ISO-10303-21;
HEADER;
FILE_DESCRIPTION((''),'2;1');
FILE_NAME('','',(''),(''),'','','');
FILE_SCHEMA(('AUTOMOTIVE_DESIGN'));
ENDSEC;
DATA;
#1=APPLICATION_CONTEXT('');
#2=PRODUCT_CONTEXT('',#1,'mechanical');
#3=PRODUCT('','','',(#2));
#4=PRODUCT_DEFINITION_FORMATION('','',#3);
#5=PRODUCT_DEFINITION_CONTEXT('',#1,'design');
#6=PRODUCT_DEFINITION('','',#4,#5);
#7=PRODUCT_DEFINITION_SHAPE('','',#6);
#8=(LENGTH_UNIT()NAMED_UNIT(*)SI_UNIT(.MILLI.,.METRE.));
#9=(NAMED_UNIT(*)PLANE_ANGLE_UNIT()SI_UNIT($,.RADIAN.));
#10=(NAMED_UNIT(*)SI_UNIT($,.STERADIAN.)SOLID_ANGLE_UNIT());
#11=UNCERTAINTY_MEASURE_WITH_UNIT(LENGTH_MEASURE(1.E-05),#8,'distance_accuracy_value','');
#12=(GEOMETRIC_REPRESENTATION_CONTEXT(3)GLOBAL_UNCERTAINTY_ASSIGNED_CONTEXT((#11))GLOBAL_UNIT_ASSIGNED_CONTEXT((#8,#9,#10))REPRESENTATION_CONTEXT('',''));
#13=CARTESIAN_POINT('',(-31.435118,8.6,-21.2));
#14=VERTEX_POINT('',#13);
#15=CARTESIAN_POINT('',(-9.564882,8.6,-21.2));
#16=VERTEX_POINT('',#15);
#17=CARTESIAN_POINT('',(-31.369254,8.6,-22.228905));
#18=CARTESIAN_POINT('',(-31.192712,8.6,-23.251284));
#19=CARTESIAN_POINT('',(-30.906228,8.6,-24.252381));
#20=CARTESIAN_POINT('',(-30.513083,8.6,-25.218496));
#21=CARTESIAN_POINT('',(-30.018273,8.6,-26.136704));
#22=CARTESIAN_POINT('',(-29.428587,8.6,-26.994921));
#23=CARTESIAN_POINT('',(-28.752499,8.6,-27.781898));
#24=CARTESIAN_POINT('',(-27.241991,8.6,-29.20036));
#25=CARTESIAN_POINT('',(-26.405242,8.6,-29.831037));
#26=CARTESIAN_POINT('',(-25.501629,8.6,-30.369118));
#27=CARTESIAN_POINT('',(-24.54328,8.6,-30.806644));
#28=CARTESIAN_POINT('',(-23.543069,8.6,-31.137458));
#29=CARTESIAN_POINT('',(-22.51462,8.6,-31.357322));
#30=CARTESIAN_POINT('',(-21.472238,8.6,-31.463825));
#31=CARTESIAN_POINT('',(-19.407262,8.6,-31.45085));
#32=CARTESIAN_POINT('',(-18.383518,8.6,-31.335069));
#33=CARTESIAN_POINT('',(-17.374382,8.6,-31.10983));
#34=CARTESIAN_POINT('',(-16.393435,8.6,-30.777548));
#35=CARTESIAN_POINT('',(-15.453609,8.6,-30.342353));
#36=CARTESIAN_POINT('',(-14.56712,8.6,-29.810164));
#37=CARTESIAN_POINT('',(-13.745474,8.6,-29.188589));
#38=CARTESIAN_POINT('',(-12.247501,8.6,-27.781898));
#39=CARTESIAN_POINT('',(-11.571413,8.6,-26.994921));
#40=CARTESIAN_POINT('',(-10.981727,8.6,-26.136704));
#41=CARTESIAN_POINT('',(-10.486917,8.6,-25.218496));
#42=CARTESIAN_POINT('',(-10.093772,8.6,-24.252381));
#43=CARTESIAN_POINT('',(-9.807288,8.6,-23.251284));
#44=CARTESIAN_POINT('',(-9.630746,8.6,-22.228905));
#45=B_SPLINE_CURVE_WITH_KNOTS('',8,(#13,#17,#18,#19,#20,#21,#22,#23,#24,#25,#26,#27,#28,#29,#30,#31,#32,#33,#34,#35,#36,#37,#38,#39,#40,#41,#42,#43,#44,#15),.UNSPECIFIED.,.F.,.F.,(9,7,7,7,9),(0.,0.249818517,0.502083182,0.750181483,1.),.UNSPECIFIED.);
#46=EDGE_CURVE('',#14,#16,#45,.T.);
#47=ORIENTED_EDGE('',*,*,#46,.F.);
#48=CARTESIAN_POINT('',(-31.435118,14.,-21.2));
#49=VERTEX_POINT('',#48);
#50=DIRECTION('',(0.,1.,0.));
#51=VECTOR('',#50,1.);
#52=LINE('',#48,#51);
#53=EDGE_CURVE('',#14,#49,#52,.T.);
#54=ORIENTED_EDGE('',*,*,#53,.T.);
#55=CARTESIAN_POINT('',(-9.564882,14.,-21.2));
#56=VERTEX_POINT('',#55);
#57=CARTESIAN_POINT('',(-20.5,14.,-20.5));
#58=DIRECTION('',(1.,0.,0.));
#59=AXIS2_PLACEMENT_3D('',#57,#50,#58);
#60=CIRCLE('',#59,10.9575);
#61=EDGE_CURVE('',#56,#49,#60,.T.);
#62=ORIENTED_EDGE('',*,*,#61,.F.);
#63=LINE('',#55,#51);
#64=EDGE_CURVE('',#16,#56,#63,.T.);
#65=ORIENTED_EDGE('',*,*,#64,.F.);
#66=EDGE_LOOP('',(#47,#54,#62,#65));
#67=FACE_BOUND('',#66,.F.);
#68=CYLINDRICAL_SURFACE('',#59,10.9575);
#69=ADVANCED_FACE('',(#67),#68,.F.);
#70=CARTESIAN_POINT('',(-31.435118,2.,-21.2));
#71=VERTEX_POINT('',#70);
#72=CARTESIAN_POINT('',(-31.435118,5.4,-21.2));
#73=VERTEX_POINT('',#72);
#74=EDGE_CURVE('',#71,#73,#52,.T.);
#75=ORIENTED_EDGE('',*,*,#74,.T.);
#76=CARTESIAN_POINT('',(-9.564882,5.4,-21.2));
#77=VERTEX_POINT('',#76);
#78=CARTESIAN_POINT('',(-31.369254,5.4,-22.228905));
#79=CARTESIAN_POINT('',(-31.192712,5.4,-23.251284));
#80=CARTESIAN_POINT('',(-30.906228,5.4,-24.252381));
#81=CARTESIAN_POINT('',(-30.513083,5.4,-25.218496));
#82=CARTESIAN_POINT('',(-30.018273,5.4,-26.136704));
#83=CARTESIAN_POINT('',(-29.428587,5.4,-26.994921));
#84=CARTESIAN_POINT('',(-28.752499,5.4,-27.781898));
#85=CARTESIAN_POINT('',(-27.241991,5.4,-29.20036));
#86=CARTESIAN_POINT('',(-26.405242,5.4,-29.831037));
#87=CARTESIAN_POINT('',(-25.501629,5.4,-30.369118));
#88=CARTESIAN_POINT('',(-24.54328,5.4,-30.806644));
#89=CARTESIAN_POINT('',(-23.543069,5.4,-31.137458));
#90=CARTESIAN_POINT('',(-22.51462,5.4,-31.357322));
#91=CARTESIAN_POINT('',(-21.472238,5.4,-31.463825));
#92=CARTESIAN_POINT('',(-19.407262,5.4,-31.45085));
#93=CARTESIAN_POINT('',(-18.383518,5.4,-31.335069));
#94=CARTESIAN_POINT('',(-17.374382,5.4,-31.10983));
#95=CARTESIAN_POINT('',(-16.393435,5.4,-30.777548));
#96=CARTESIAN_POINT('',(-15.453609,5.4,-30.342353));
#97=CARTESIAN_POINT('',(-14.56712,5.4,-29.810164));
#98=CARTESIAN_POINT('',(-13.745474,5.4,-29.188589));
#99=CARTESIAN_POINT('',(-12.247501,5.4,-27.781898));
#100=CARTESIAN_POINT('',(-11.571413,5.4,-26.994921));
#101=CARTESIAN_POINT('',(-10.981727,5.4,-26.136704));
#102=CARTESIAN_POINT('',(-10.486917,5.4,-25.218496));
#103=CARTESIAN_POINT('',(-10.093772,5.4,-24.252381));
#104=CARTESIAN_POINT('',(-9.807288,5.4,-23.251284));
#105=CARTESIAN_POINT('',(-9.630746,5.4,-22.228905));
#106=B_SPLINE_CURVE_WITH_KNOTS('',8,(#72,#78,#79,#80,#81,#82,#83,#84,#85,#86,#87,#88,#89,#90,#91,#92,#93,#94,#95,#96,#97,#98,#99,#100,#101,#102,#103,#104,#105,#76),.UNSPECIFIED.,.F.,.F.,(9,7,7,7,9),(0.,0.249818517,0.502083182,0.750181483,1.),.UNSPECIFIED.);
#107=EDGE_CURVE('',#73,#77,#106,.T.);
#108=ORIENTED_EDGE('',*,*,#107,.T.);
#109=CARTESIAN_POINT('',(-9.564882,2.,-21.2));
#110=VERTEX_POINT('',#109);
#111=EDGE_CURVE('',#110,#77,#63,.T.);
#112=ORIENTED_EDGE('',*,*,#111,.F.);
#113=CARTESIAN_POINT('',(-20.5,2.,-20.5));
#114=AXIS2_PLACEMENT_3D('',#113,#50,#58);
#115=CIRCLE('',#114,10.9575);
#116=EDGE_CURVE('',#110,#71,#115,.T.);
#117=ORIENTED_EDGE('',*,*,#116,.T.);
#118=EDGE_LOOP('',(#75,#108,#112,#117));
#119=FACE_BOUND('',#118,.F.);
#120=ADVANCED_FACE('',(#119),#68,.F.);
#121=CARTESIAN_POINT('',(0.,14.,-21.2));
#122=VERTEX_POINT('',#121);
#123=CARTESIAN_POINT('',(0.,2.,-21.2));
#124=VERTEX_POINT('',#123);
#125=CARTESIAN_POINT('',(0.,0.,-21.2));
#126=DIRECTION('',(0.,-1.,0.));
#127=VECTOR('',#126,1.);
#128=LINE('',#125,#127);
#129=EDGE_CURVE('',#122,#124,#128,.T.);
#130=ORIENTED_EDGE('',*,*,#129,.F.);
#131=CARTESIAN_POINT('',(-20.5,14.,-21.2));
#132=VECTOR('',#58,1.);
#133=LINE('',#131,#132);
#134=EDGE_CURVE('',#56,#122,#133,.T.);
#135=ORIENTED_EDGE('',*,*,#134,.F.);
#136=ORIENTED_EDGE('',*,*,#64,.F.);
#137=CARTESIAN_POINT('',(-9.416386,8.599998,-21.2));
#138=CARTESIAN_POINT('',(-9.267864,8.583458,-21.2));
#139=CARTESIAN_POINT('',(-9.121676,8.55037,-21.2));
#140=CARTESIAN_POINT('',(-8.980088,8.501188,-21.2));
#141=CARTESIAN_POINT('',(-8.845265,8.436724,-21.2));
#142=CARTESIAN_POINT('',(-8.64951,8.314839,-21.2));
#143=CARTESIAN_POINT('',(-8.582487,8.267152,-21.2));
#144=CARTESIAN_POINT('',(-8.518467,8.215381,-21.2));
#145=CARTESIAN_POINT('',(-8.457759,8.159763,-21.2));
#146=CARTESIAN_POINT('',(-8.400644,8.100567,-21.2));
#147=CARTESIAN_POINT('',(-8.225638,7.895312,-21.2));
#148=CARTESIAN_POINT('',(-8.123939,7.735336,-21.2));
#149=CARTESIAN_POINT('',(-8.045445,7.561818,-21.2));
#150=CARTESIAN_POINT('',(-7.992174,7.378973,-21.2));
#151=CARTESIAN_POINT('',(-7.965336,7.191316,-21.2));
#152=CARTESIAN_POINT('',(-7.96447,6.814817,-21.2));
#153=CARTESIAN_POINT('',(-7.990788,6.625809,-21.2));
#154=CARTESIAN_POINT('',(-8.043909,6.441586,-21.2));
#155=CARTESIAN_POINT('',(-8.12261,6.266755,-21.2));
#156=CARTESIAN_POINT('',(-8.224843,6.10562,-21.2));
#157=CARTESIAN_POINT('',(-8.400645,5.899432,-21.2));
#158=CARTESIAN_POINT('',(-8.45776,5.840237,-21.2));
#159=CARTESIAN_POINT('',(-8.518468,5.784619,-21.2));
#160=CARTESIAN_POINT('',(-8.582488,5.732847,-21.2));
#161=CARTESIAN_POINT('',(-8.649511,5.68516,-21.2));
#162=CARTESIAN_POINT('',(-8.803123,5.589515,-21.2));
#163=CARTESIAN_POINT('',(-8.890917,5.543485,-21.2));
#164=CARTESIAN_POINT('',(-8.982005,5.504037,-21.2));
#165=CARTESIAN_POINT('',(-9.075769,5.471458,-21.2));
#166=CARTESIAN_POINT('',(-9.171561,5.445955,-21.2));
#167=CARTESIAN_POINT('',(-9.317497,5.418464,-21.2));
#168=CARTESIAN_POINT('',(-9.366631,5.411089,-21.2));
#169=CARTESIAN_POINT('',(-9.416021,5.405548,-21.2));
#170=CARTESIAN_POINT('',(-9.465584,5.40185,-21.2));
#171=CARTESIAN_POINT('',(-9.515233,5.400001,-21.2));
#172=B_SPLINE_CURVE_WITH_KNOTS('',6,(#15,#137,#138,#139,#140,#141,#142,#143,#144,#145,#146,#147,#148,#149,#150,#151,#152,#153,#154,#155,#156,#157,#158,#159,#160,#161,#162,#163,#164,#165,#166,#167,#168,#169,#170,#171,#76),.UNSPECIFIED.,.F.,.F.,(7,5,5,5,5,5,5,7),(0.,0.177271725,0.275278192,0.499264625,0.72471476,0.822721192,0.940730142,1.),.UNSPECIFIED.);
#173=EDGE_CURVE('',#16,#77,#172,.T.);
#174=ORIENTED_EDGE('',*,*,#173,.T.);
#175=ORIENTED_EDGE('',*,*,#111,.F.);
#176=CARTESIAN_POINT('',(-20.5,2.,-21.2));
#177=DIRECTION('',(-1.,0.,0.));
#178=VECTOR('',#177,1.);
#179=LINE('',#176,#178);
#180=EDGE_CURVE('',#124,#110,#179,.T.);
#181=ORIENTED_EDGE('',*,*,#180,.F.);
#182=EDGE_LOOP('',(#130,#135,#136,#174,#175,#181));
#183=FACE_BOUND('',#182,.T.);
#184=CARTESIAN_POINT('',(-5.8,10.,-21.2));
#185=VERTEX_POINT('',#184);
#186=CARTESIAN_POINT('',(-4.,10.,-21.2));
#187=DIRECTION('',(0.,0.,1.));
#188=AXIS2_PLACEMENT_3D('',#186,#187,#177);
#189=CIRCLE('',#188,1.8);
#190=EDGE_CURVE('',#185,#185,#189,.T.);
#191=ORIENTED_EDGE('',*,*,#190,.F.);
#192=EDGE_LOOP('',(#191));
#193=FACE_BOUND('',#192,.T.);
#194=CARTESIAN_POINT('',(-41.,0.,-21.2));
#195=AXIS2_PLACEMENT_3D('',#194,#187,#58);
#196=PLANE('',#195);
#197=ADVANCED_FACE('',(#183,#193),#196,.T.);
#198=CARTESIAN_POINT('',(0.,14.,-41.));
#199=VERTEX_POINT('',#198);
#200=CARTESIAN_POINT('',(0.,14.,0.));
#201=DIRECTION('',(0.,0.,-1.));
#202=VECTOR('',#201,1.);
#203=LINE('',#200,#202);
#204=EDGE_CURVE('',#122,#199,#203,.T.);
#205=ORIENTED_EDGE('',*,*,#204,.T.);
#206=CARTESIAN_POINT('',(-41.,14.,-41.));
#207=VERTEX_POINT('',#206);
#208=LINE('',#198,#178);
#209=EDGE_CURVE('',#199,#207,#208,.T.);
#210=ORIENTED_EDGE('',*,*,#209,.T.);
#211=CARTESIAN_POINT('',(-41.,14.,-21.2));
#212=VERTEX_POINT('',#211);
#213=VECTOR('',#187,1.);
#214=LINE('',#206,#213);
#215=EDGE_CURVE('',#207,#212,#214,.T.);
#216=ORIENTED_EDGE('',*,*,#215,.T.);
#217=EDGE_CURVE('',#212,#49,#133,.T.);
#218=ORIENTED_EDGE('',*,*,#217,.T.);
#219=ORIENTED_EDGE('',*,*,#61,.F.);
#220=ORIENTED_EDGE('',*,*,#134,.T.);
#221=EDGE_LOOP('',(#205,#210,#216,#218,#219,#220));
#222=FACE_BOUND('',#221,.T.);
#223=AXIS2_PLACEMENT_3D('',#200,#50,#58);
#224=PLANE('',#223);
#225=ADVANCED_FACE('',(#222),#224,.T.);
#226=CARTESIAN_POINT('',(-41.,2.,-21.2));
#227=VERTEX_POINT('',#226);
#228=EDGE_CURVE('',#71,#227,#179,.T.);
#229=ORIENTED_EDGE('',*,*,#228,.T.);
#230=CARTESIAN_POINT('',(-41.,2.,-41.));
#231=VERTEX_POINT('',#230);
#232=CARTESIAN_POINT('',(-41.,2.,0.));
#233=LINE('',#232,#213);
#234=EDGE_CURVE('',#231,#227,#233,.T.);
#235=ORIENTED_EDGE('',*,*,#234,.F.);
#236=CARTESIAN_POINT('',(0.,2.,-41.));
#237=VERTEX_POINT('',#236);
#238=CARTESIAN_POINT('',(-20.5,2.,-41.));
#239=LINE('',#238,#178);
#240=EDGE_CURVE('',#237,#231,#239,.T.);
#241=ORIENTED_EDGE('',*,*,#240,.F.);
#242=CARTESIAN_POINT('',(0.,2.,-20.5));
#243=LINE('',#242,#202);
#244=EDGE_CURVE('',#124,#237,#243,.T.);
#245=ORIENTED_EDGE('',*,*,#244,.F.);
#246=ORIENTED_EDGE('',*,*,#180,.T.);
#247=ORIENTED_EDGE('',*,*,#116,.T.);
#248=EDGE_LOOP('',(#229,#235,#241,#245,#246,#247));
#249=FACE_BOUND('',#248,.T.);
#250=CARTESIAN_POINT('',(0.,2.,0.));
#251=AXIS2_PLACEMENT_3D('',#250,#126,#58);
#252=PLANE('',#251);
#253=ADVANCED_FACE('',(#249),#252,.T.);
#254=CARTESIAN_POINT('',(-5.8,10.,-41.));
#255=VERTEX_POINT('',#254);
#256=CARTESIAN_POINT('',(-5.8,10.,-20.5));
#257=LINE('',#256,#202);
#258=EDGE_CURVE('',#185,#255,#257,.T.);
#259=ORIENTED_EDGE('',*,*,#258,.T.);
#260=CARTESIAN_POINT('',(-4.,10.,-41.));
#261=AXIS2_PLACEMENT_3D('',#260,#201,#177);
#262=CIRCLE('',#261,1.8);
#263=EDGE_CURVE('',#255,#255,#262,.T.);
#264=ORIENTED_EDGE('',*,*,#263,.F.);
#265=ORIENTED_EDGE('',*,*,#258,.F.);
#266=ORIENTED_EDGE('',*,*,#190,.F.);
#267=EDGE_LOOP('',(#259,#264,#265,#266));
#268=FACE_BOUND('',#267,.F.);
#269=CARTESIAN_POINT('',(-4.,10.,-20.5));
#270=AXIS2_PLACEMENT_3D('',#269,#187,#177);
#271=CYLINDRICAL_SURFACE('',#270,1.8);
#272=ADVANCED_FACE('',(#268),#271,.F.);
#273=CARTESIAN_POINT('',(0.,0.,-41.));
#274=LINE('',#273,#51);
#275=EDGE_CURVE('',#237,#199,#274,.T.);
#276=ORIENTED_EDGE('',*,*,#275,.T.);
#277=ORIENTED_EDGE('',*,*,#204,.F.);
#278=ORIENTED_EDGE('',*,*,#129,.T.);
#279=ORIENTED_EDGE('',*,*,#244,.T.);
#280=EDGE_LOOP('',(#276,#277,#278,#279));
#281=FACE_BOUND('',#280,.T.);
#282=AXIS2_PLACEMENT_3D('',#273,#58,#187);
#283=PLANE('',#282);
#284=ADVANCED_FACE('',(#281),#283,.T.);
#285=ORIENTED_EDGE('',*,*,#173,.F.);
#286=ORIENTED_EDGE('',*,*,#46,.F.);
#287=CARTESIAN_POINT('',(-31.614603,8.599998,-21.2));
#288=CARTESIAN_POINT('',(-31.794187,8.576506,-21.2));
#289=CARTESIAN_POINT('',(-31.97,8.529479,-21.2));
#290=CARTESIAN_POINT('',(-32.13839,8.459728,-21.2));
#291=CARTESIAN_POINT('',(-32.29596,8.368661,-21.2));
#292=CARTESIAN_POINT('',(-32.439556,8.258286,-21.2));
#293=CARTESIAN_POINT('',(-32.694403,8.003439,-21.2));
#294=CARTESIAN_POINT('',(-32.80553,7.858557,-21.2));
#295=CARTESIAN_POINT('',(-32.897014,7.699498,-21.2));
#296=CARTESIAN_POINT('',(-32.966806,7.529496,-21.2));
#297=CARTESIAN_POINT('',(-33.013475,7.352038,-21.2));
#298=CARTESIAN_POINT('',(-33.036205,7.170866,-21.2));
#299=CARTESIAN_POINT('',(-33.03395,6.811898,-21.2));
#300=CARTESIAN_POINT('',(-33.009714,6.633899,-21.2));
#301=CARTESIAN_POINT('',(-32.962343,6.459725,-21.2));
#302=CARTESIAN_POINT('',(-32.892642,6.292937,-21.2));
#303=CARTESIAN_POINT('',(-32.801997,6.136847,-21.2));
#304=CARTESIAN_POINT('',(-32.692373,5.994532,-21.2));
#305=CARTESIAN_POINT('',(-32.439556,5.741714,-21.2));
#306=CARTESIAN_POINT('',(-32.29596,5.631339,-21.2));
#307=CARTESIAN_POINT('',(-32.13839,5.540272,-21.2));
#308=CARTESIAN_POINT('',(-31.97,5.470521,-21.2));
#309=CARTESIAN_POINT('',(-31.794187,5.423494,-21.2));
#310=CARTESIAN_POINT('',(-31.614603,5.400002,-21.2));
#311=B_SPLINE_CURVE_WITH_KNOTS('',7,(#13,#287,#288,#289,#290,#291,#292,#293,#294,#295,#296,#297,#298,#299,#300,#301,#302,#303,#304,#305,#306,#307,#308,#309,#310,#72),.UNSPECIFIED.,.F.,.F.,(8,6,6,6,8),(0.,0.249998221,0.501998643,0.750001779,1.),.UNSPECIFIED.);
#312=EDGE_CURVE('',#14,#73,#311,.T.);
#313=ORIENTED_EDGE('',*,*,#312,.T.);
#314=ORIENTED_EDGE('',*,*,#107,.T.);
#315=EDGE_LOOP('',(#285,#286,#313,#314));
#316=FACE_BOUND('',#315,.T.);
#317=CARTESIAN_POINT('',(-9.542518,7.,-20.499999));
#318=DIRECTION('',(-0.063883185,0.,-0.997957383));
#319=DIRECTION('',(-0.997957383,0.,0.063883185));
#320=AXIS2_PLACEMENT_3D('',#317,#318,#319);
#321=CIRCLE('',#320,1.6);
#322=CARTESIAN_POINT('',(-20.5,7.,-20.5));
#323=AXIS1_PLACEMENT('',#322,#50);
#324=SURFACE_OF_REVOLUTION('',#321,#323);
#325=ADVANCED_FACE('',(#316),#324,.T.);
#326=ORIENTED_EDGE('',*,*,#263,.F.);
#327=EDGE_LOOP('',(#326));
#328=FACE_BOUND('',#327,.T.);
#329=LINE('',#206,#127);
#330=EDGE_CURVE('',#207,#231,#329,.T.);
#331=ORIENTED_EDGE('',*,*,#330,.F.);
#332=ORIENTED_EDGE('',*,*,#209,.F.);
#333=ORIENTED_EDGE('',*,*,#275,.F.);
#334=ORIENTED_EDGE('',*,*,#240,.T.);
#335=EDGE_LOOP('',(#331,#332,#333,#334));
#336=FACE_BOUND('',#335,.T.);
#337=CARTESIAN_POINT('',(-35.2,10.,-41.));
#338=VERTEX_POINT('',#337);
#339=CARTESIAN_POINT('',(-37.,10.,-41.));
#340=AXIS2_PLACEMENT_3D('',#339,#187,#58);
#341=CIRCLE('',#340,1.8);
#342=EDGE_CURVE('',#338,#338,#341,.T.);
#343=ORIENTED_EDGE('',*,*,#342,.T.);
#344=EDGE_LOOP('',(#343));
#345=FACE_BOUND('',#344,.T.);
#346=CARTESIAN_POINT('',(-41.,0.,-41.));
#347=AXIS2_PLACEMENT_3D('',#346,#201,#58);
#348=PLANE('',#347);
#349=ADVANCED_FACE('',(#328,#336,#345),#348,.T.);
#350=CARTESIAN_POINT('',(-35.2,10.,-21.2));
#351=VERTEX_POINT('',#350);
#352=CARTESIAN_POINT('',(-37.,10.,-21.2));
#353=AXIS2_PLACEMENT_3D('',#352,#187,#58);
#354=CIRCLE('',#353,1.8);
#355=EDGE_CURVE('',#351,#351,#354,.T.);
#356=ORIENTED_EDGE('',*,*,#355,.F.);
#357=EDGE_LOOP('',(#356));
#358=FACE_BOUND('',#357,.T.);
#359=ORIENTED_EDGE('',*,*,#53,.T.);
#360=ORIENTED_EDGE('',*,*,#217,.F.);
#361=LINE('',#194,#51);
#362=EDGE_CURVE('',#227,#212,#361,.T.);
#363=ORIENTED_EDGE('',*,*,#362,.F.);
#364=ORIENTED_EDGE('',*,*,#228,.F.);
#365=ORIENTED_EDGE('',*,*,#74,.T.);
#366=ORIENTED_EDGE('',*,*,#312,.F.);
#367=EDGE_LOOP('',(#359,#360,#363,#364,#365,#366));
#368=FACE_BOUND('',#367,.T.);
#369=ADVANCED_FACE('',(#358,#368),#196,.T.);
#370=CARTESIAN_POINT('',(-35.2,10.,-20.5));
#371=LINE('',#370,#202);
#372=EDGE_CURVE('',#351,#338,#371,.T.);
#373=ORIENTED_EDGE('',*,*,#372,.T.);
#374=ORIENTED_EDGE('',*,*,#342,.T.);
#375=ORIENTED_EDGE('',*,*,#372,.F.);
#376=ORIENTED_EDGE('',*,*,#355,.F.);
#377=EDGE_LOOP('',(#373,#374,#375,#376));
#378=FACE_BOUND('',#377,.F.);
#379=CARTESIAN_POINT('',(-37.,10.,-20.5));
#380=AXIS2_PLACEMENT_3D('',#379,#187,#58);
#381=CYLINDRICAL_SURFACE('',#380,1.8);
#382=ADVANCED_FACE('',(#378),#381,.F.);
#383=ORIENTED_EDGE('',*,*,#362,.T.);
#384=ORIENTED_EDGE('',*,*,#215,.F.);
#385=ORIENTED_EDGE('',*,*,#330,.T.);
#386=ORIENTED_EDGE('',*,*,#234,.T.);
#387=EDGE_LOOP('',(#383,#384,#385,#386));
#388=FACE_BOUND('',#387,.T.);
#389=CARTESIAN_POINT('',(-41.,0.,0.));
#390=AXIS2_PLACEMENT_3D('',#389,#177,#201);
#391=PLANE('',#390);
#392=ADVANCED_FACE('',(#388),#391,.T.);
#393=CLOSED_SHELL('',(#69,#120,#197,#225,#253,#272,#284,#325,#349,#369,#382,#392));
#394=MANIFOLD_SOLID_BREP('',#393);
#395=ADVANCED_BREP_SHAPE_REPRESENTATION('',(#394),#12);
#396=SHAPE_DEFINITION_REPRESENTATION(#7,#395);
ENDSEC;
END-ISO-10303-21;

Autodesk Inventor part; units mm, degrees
ref_plane "YZ Plane" through (0, 0, 0) normal (1, 0, 0) x (0, 1, 0)
ref_plane "XZ Plane" through (0, 0, 0) normal (0, 1, 0) x (-1, 0, 0)
sketch "Sketch1" plane through (0, 0, 0) normal (0, 1, 0) x (-1, 0, 0)
  line L0 (0, 0) -> (41, 0)
  line L1 (41, 0) -> (41, -41)
  line L2 (41, -41) -> (0, -41)
  line L3 (0, -41) -> (0, 0)
  dimension "d0" = 41
  dimension "d1" = 41
extrude "Extrusion1" add sketch "Sketch1" along normal blind 9.5
sketch "Sketch3" plane through (0, 9.5, 0) normal (0, 1, 0) x (1, 0, 0)
  circle A0 centre (-20.5, 20.5) radius 10
  point P0 (0, 0)
  dimension "d5" = 20
extrude "Extrusion2" cut sketch "Sketch3" against normal blind 10
sketch "Sketch4" plane through (0, 9.5, 0) normal (0, 1, 0) x (1, 0, 0)
  circle A0 centre (-20.5, 20.5) radius 10 projected
  circle A1 centre (-20.5, 20.5) radius 11.75
  point P0 (0, 0)
  dimension "d8" = 23.5
extrude "Extrusion3" cut sketch "Sketch4" against normal blind 5
sketch "Sketch5" plane through (0, 9.5, 0) normal (0, 1, 0) x (1, 0, 0)
  line L0 (-41, 41) -> (-41, 0) projected
  line L1 (-41, 0) -> (0, 0)
  line L2 (0, 0) -> (0, 41)
  line L3 (0, 41) -> (-41, 41)
  line L4 (-41, 41) -> (-41, 0)
  circle A0 centre (-20.5, 20.5) radius 11.75 projected
  circle A1 centre (-20.5, 20.5) radius 10
extrude "Extrusion4" add sketch "Sketch5" along normal blind 4.5 contours L3 L2 L1 L0 | A0
sketch "Sketch6" plane through (-41, 0, 0) normal (0, 0, 1) x (1, 0, 0)
  line L0 (0, 0) -> (0, 14) projected
  line L1 (0, 14) -> (41, 14)
  line L2 (41, 14) -> (41, 0)
  line L3 (41, 0) -> (0, 0)
  line L4 (0, 0) -> (0, 14)
extrude "Extrusion5" cut sketch "Sketch6" against normal blind 20.5
sketch "Sketch8" plane through (-41, 0, -20.5) normal (0, 0, 1) x (1, 0, 0)
  circle A0 centre (4, 10) radius 1.8
  point P0 (41, 0)
  dimension "d15" = 3.6
extrude "Extrusion6" cut sketch "Sketch8" against normal blind 20.5
ref_plane "Work Plane1" through (-20.5, 0, -41) normal (1, 0, 0) x (0, 0, -1)
mirror "Mirror1" about plane through (-20.5, 0, -41) normal (1, 0, 0) of "Extrusion6"
sketch "Sketch9" plane through (-41, 0, -20.5) normal (0, 0, 1) x (1, 0, 0)
  line L0 (10.5, 14) -> (10.5, 9.5) projected
  line L1 (8.75, 4.5) -> (10.5, 4.5) projected
  line L2 (10.5, 9.5) -> (8.75, 9.5)
  line L3 (8.75, 9.5) -> (8.75, 4.5)
  line L4 (8.75, 4.5) -> (10.5, 4.5)
  line L5 (10.5, 4.5) -> (10.5, 9.5)
  point P0 (41, 0)
sketch "Sketch11" plane through (0, 4.5, 0) normal (0, 1, 0) x (1, 0, 0)
  arc A0 (-10.5, 20.5) -> (-30.5, 20.5) centre (-20.5, 20.5) ccw projected
  arc A1 (-9.625, 20.5) -> (-31.375, 20.5) centre (-20.5, 20.5) ccw
  line L0 (-41, 41) -> (-41, 20.5) projected
  point P0 (0, 0)
sweep "Sweep1" add profiles "Sketch9" path "Sketch11" path curves A1
sketch "Sketch12" plane through (-41, 0, -20.5) normal (0, 0, 1) x (1, 0, 0)
  line L0 (10.5, 14) -> (10.5, 0) projected
  circle A0 centre (10.5, 7) radius 1.6
  point P0 (41, 0)
  dimension "d21" = 3.2
sketch3d "3D Sketch1"
  arc A0 (-30.5, 14, -20.5) -> (-27.5711, 14, -27.5711) centre (-20.5, 14, -20.5) ccw
  arc A1 (-27.5711, 14, -27.5711) -> (-20.5, 14, -30.5) centre (-20.5, 14, -20.5) ccw
  arc A2 (-20.5, 14, -30.5) -> (-13.4289, 14, -27.5711) centre (-20.5, 14, -20.5) ccw
  arc A3 (-13.4289, 14, -27.5711) -> (-10.5, 14, -20.5) centre (-20.5, 14, -20.5) ccw
sweep "Sweep2" cut profiles "Sketch12" path "3D Sketch1"
sketch "Sketch13" plane through (0, 0, 0) normal (0, -1, 0) x (1, 0, 0)
  line L0 (-53.975, -9.525) -> (46.0375, -9.525)
  line L1 (46.0375, -9.525) -> (46.0375, -71.4375)
  line L2 (46.0375, -71.4375) -> (-53.975, -71.4375)
  line L3 (-53.975, -71.4375) -> (-53.975, -9.525)
  point P0 (0, 0)
extrude "Extrusion7" cut sketch "Sketch13" against normal blind 2
sketch "Sketch14" plane through (-41, 0, -20.5) normal (0, 0, 1) x (1, 0, 0)
  line L0 (-1.5875, 15.875) -> (46.0375, 15.875)
  line L1 (46.0375, 15.875) -> (46.0375, -1.5875)
  line L2 (46.0375, -1.5875) -> (-1.5875, -1.5875)
  line L3 (-1.5875, -1.5875) -> (-1.5875, 15.875)
  point P0 (41, 0)
extrude "Extrusion8" cut sketch "Sketch14" against normal blind 0.7
sketch "Sketch15" plane through (0, 14, 0) normal (0, 1, 0) x (1, 0, 0)
  arc A0 (-10.5245, 21.2) -> (-30.4755, 21.2) centre (-20.5, 20.5) ccw projected
  circle A1 centre (-20.5, 20.5) radius 10.9575
  point P0 (0, 0)
  dimension "d28" = 21.915
extrude "Extrusion9" cut sketch "Sketch15" against normal blind 15
sketch "Sketch18" plane through (-41, 0, -21.2) normal (0, 0, 1) x (1, 0, 0)
  point P0 (41, 0)
sketch "Sketch19" plane through (-41, 0, -21.2) normal (0, 0, 1) x (1, 0, 0)
  circle A0 centre (9.5649, 7) radius 1.6
  point P0 (41, 0)
  dimension "d34" = 3.2
sketch "Sketch20" plane through (0, 14, 0) normal (0, 1, 0) x (1, 0, 0)
  arc A0 (-9.5649, 21.2) -> (-31.4351, 21.2) centre (-20.5, 20.5) ccw projected
  circle A1 centre (-20.5, 20.5) radius 10.9575
  point P0 (0, 0)
sweep "Sweep4" cut profiles "Sketch19" path "Sketch20" path curves A1
properties part number "8.1 peristaltic pump lid 3mm"
